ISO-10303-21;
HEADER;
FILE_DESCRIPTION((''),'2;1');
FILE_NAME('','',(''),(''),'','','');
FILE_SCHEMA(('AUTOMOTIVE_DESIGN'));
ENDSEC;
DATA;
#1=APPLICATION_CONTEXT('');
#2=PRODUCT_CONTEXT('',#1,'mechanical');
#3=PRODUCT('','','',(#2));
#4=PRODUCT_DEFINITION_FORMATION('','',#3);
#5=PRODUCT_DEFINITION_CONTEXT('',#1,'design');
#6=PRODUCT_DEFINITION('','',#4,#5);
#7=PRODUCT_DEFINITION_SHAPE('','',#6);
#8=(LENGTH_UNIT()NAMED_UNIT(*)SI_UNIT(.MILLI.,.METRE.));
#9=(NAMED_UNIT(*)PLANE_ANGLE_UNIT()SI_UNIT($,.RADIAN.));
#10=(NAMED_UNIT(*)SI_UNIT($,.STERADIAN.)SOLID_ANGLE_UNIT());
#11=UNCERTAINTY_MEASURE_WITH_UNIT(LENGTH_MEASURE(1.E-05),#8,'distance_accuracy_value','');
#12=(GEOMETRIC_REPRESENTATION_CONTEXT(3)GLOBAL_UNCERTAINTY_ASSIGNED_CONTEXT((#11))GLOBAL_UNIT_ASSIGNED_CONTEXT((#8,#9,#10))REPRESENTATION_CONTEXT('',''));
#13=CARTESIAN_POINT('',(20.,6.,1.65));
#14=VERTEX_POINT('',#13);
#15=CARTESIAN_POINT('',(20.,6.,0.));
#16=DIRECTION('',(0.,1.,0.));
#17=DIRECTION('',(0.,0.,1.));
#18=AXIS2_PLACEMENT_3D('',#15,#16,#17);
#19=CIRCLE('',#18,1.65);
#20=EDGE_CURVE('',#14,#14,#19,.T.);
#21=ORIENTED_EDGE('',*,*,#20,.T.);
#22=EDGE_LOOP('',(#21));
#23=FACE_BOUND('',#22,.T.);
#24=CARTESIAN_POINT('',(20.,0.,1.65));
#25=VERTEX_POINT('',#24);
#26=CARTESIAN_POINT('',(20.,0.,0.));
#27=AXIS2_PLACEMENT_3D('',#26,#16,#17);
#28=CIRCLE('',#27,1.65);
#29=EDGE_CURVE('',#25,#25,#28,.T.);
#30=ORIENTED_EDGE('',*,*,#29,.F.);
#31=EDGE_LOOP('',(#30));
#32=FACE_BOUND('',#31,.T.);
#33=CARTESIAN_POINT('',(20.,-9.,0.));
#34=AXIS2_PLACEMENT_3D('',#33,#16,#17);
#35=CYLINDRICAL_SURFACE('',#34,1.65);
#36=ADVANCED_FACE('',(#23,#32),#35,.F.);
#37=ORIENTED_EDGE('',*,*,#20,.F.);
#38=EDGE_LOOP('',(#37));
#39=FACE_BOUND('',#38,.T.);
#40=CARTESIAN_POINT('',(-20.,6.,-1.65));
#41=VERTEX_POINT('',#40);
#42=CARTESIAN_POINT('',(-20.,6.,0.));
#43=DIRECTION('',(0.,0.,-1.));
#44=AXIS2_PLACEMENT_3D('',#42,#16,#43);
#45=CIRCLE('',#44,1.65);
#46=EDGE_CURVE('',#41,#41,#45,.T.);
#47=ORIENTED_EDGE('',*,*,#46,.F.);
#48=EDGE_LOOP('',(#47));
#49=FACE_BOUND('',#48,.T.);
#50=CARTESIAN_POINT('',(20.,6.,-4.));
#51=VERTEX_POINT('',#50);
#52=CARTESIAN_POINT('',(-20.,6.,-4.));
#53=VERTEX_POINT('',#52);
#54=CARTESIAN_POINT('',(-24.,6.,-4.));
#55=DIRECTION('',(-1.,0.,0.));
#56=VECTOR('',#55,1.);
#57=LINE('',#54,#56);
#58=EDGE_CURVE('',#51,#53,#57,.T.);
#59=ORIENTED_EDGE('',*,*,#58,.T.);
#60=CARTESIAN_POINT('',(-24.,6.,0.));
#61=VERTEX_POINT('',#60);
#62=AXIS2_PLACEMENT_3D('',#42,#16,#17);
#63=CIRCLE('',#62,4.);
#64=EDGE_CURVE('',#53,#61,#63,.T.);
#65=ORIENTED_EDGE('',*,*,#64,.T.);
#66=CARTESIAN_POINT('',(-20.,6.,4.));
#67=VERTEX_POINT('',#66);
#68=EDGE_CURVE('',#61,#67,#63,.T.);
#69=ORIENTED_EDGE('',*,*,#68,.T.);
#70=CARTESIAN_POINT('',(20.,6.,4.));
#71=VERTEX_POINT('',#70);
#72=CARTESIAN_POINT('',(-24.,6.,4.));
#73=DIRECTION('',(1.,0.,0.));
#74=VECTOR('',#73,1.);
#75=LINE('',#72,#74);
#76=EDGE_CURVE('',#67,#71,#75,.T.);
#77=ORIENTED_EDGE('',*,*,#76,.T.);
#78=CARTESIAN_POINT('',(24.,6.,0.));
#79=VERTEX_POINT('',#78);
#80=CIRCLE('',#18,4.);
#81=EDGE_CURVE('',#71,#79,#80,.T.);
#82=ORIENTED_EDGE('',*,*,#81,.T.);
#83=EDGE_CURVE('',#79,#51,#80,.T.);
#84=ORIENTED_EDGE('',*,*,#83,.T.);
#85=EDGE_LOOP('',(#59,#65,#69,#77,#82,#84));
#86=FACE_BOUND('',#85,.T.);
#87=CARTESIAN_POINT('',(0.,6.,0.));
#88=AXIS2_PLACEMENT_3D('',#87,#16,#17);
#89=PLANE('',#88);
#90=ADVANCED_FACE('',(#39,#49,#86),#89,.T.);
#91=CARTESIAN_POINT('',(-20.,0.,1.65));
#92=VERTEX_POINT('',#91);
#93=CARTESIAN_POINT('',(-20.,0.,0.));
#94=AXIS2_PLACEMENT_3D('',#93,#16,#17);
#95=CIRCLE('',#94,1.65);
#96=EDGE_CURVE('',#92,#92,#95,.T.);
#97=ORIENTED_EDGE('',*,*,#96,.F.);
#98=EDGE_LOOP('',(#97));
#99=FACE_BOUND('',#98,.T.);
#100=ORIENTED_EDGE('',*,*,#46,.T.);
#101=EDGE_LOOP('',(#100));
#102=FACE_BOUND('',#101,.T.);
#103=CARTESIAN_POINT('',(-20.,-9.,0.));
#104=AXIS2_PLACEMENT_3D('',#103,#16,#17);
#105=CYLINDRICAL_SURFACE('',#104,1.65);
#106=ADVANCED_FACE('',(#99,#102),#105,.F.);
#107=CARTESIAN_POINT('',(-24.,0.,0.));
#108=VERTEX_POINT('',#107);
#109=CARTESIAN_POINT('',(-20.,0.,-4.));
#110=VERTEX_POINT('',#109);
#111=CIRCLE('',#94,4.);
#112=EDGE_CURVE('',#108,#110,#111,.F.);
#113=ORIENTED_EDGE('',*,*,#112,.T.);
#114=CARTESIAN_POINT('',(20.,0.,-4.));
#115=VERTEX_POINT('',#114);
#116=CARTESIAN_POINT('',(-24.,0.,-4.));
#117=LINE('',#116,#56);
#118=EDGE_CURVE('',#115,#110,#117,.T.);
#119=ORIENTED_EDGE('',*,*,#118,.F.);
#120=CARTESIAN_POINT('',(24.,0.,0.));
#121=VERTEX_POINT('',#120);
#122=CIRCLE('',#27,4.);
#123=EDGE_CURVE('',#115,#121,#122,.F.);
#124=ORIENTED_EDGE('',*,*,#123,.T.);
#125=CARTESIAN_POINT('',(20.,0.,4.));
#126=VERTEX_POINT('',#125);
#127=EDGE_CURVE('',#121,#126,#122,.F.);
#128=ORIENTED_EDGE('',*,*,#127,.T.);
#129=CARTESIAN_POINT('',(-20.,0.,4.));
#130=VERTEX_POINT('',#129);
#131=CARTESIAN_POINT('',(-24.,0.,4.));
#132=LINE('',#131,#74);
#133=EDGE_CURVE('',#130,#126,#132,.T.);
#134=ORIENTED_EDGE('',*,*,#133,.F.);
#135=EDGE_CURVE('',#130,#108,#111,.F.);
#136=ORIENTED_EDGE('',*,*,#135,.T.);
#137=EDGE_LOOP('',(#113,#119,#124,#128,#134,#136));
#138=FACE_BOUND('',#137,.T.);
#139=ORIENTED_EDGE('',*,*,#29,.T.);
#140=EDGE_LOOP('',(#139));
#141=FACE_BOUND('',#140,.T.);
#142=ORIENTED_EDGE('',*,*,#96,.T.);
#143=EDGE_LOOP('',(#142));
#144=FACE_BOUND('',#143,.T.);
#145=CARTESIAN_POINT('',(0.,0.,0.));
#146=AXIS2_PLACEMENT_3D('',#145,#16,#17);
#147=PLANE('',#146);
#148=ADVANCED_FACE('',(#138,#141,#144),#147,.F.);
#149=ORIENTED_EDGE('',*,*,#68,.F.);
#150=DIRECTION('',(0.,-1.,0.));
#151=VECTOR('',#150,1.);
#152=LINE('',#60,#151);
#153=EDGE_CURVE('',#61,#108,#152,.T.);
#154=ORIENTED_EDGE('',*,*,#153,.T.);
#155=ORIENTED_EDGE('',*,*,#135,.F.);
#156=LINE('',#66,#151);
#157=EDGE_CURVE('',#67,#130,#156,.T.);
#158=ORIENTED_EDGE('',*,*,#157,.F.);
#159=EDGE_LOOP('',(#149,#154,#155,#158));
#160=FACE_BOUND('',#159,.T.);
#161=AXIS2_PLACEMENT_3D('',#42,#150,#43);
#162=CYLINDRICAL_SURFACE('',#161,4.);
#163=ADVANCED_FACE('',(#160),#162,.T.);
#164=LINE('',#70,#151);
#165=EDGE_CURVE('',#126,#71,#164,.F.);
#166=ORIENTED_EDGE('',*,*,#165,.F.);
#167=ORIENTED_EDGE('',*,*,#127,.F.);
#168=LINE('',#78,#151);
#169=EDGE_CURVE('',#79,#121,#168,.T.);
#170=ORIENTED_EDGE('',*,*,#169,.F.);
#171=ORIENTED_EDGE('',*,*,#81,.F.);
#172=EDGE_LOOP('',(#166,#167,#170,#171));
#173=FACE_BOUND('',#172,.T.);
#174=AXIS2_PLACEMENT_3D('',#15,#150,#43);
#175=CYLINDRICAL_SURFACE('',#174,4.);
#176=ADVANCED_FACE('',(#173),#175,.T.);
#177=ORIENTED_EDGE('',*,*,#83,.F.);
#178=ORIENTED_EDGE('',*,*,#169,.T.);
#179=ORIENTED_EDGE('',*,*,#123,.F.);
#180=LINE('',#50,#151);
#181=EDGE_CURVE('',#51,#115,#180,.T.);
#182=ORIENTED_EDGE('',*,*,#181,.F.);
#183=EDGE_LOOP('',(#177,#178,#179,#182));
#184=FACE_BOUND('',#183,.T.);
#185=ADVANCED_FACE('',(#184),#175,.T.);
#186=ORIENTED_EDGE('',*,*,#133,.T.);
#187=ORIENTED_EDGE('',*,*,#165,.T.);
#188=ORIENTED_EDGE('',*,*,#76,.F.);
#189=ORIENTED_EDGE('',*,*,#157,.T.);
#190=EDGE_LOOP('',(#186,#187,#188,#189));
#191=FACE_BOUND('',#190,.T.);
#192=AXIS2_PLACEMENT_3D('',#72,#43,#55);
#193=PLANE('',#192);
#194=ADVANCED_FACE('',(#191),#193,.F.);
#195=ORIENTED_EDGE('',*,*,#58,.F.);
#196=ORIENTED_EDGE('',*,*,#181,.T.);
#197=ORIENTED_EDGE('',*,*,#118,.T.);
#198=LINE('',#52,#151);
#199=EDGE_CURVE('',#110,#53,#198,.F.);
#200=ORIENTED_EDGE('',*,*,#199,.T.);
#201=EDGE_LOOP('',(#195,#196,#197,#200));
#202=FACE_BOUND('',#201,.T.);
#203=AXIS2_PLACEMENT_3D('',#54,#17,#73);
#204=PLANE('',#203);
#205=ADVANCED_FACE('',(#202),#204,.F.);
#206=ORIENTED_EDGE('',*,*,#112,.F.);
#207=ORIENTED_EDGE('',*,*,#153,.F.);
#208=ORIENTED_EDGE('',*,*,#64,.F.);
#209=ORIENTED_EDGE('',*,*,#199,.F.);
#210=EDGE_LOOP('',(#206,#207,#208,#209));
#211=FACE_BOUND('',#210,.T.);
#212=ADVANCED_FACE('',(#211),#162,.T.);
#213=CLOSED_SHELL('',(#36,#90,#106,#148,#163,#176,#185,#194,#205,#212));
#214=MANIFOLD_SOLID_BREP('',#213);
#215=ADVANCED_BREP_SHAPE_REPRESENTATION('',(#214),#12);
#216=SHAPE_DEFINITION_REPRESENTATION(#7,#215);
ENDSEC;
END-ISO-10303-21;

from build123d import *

# Parameters (mm, degrees)
SKETCH_1_W          = 48
SKETCH_1_H          = 8
EXTRUDE_1_DEPTH     = 6
SKETCH_2_R          = 1.65
CUT_EXTRUDE_1_DEPTH = 15
FILLET_1_R          = 4


with BuildPart() as part:
    # 草图1 → 凸台-拉伸1 (new body)
    with BuildSketch(Plane(origin=(0, 0, 0), x_dir=(1, 0, 0), z_dir=(0, 1, 0))):
        Rectangle(SKETCH_1_W, SKETCH_1_H)
    extrude(amount=EXTRUDE_1_DEPTH)

    # 草图2 → 切除-拉伸1 (cut)
    with BuildSketch(Plane(origin=(0, 6, 0), x_dir=(1, 0, 0), z_dir=(0, 1, 0))):
        with Locations(Location((20, 0, 0), (0, 0, 270))):
            Circle(SKETCH_2_R)
        with Locations(Location((-20, 0, 0), (0, 0, 270))):
            Circle(SKETCH_2_R)
    extrude(amount=-CUT_EXTRUDE_1_DEPTH, mode=Mode.SUBTRACT)

    # 圆角1
    fillet_1_edges = [part.edges().sort_by_distance(p)[0] for p in [
        (-24, 3, 4),
        (-24, 3, -4),
        (24, 3, -4),
        (24, 3, 4),
    ]]
    fillet(fillet_1_edges, radius=FILLET_1_R - 0.0001)  # a hair under: the kernel refuses the full size


solid = part.part
